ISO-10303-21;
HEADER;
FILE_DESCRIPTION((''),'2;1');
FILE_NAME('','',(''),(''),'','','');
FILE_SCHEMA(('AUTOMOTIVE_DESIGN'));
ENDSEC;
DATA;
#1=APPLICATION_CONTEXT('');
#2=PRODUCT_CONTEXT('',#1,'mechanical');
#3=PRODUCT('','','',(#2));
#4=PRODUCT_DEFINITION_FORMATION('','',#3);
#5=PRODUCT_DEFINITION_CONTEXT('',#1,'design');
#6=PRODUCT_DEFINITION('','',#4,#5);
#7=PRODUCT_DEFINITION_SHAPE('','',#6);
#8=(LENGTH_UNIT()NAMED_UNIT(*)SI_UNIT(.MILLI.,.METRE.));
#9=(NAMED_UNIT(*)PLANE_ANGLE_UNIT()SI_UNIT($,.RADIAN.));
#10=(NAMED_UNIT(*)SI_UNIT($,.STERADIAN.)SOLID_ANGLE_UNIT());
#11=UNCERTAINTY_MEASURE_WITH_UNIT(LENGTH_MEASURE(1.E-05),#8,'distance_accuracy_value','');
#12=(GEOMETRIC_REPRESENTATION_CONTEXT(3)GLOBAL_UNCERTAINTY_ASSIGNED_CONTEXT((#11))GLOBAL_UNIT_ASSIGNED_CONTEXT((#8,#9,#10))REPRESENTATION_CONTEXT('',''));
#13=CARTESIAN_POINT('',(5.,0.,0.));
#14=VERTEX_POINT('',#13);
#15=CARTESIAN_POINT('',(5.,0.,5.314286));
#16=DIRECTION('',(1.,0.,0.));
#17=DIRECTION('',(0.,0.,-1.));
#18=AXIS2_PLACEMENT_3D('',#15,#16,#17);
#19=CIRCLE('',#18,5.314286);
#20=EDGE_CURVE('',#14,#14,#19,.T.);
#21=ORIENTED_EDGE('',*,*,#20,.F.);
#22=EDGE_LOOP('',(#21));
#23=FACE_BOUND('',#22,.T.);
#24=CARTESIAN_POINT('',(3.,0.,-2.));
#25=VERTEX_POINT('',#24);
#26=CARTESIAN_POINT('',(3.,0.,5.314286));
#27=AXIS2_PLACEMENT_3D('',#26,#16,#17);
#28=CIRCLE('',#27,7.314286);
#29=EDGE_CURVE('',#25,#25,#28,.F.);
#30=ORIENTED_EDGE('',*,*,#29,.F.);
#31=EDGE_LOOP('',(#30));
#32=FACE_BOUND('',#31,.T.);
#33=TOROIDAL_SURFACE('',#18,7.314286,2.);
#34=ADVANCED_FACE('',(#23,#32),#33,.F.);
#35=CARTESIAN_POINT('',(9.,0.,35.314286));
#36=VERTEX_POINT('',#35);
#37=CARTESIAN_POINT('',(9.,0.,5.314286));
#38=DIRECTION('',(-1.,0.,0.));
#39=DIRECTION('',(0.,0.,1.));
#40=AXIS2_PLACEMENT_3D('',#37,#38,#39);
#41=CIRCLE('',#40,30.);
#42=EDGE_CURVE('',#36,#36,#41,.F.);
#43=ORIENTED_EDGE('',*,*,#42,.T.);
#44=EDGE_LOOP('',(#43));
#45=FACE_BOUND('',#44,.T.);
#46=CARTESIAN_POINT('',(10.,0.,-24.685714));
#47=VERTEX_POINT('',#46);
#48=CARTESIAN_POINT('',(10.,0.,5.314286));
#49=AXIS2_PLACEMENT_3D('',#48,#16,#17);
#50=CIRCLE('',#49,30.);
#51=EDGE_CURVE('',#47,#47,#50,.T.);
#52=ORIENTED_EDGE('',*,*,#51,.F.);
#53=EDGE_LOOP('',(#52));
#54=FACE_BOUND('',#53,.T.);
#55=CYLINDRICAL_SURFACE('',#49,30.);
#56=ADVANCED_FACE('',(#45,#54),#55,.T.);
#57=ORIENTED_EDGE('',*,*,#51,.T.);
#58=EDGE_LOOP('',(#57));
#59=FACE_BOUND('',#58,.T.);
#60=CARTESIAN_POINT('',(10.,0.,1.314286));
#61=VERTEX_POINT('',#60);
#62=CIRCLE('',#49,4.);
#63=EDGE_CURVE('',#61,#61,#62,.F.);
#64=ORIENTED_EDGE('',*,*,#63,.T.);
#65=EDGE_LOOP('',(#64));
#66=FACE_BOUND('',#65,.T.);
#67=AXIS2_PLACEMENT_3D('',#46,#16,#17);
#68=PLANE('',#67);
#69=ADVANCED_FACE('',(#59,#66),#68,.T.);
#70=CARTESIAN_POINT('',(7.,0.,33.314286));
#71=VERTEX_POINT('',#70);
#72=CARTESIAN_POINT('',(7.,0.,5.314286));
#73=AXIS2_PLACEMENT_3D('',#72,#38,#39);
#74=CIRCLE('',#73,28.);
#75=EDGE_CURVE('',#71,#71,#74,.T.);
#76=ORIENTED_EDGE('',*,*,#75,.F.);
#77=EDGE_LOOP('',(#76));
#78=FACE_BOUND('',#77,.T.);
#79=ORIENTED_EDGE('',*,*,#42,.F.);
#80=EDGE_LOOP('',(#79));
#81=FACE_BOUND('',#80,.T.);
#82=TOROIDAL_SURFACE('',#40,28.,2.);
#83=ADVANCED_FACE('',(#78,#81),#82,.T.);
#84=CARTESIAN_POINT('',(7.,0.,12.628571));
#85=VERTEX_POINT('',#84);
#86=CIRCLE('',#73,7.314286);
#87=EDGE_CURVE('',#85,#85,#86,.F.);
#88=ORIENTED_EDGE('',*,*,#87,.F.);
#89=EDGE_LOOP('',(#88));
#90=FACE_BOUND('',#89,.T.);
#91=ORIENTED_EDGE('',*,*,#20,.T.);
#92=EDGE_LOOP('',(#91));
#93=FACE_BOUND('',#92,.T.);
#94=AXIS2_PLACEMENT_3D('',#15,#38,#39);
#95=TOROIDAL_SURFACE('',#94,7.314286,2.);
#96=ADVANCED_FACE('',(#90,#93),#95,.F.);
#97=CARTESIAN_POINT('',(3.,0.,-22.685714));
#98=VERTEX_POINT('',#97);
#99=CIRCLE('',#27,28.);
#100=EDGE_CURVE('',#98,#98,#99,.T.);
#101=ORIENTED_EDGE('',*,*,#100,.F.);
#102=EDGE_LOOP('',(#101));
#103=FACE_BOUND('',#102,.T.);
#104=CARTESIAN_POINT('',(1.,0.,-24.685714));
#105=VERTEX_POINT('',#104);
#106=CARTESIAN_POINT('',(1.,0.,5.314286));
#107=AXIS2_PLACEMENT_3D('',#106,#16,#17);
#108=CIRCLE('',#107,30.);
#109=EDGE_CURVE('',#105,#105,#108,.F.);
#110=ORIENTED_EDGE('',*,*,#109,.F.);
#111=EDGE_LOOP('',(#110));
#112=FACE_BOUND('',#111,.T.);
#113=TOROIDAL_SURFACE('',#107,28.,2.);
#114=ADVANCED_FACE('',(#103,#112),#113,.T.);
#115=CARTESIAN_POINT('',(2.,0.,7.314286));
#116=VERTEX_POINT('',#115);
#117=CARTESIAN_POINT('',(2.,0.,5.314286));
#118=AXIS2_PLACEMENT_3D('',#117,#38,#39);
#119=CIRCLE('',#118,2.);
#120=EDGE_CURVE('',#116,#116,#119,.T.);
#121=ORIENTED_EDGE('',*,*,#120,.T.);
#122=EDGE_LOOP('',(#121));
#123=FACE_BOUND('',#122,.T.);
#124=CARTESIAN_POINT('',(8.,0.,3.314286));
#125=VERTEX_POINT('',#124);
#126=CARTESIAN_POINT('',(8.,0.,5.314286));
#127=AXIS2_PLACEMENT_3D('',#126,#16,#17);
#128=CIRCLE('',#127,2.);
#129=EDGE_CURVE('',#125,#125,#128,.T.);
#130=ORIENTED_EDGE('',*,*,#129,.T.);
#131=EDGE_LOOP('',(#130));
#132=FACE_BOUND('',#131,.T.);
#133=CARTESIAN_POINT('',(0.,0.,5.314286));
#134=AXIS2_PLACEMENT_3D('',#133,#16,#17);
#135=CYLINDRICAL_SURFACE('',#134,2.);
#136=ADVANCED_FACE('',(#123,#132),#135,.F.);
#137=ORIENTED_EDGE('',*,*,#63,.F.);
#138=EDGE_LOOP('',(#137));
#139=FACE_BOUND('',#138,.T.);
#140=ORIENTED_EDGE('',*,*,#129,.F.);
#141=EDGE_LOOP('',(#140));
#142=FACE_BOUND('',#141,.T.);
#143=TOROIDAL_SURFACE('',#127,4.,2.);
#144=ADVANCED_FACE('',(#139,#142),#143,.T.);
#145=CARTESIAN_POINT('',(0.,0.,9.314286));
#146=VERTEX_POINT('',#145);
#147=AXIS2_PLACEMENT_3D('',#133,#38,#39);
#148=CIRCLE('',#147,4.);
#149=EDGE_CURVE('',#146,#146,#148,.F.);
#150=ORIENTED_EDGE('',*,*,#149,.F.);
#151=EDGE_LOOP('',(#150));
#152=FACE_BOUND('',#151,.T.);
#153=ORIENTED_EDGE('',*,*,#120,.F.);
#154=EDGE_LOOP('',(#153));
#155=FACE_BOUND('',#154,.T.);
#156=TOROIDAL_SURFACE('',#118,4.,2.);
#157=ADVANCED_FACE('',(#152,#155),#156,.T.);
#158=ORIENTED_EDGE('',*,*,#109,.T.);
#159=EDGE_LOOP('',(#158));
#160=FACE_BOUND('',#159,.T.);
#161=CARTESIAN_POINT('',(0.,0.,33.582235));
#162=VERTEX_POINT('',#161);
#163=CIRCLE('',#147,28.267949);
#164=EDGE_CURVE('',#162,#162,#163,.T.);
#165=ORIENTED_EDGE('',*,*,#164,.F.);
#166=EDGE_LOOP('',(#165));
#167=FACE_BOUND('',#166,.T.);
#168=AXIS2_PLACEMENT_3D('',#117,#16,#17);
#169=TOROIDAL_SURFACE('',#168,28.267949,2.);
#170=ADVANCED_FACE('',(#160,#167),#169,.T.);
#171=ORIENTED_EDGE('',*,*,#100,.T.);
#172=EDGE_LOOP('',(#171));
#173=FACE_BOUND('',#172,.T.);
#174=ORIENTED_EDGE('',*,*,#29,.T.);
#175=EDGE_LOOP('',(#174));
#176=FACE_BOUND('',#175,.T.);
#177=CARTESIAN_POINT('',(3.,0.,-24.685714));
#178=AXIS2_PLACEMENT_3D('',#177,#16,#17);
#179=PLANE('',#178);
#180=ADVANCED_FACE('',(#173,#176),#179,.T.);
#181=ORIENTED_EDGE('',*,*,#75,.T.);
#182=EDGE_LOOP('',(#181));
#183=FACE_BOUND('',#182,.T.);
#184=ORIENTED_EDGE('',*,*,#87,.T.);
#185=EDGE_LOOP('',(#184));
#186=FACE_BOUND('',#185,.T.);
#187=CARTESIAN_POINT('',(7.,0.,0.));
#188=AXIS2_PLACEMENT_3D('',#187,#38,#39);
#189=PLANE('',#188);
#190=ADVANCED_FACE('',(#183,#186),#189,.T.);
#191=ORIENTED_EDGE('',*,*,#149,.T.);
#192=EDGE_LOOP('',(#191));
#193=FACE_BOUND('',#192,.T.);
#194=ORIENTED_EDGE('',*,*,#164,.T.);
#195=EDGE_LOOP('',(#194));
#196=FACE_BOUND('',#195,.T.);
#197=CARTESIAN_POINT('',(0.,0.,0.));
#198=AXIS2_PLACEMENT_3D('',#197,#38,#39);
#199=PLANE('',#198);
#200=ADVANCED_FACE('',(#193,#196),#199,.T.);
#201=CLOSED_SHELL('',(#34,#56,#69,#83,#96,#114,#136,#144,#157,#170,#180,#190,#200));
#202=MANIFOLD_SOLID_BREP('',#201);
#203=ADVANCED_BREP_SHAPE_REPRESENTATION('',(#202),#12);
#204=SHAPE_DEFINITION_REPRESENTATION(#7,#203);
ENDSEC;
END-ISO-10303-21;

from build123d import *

# Parameters (mm, degrees)
SKETCH2_R          = 2
CUT_EXTRUDE1_DEPTH = 10
FILLET1_R          = 2
FILLET2_R          = 2
FILLET3_R          = 2


# Some blends are built 0.0001 mm under size
with BuildPart() as part:
    # Sketch1 → Revolve1 (revolve)
    with BuildSketch(Plane(origin=(0, 0, 0), x_dir=(1, 0, 0), z_dir=(0, 1, 0))):
        Polygon((0, 0), (0, 24.685714286), (3, 24.685714286), (3, 0), (7, 0), (7, 24.685714286), (10, 24.685714286), (10, -5.314285714), (0, -5.314285714), align=None)
    revolve(axis=Axis((10, 0, 5.314285714), (-1, 0, 0)))

    # Sketch2 → Cut-Extrude1 (cut)
    with BuildSketch(Plane(origin=(10, 0, 0), x_dir=(0, 0, -1), z_dir=(1, 0, 0))):
        with Locations((-5.314285714, 0)):
            Circle(SKETCH2_R)
    extrude(amount=-CUT_EXTRUDE1_DEPTH, mode=Mode.SUBTRACT)

    # Fillet1
    fillet1_edges = [part.edges().sort_by_distance(p)[0] for p in [
        (7, 0, 10.628571429),
        (3, 0, 10.628571429),
        (3, 0, 35.314285714),
    ]]
    fillet(fillet1_edges, radius=FILLET1_R - 0.0001)  # a hair under: the kernel refuses the full size

    # Fillet2
    fillet2_edges = [part.edges().sort_by_distance(p)[0] for p in [
        (10, 0, 7.314285714),
        (7, 0, 35.314285714),
    ]]
    fillet(fillet2_edges, radius=FILLET2_R)

    # Fillet3
    # the kernel refuses this fillet: 2 mm, written as the material it takes off along each edge
    with BuildSketch(Plane(origin=(0, 0, 5.314285714), x_dir=(0, 0, -1), z_dir=(0, -1, 0))) as fillet3_piece_1:
        with BuildLine():
            CenterArc((2 + FILLET3_R, FILLET3_R), FILLET3_R, 180, 90)
            Line((2 + FILLET3_R, 0), (2 + FILLET3_R, -FILLET3_R * 0.02))
            Line((2 + FILLET3_R, -FILLET3_R * 0.02), (2 - FILLET3_R * 0.02, -FILLET3_R * 0.02))
            Line((2 - FILLET3_R * 0.02, -FILLET3_R * 0.02), (2 - FILLET3_R * 0.02, FILLET3_R))
            Line((2 - FILLET3_R * 0.02, FILLET3_R), (2, FILLET3_R))
        make_face()
    revolve(axis=Axis((0, 0, 5.314285714), (1, 0, 0)), mode=Mode.SUBTRACT)
    with BuildSketch(Plane(origin=(0, 0, 5.314285714), x_dir=(0, 0, -1), z_dir=(0, 1, 0))) as fillet3_piece_2:
        with BuildLine():
            CenterArc((28.267891461, -2), FILLET3_R, 29.996692082, 60.003307918)
            Line((30, -1.0001), (30.034642171, -0.980102))
            ThreePointArc((30.034642171, -0.980102), (30.04, -0.50005), (30.04, 0))
            Line((30.04, 0), (30, 0.04))
            Line((30, 0.04), (28.267891461, 0.04))
            Line((28.267891461, 0.04), (28.267891461, 0))
        make_face()
    revolve(axis=Axis((0, 0, 5.314285714), (-1, 0, 0)), mode=Mode.SUBTRACT)


solid = part.part
